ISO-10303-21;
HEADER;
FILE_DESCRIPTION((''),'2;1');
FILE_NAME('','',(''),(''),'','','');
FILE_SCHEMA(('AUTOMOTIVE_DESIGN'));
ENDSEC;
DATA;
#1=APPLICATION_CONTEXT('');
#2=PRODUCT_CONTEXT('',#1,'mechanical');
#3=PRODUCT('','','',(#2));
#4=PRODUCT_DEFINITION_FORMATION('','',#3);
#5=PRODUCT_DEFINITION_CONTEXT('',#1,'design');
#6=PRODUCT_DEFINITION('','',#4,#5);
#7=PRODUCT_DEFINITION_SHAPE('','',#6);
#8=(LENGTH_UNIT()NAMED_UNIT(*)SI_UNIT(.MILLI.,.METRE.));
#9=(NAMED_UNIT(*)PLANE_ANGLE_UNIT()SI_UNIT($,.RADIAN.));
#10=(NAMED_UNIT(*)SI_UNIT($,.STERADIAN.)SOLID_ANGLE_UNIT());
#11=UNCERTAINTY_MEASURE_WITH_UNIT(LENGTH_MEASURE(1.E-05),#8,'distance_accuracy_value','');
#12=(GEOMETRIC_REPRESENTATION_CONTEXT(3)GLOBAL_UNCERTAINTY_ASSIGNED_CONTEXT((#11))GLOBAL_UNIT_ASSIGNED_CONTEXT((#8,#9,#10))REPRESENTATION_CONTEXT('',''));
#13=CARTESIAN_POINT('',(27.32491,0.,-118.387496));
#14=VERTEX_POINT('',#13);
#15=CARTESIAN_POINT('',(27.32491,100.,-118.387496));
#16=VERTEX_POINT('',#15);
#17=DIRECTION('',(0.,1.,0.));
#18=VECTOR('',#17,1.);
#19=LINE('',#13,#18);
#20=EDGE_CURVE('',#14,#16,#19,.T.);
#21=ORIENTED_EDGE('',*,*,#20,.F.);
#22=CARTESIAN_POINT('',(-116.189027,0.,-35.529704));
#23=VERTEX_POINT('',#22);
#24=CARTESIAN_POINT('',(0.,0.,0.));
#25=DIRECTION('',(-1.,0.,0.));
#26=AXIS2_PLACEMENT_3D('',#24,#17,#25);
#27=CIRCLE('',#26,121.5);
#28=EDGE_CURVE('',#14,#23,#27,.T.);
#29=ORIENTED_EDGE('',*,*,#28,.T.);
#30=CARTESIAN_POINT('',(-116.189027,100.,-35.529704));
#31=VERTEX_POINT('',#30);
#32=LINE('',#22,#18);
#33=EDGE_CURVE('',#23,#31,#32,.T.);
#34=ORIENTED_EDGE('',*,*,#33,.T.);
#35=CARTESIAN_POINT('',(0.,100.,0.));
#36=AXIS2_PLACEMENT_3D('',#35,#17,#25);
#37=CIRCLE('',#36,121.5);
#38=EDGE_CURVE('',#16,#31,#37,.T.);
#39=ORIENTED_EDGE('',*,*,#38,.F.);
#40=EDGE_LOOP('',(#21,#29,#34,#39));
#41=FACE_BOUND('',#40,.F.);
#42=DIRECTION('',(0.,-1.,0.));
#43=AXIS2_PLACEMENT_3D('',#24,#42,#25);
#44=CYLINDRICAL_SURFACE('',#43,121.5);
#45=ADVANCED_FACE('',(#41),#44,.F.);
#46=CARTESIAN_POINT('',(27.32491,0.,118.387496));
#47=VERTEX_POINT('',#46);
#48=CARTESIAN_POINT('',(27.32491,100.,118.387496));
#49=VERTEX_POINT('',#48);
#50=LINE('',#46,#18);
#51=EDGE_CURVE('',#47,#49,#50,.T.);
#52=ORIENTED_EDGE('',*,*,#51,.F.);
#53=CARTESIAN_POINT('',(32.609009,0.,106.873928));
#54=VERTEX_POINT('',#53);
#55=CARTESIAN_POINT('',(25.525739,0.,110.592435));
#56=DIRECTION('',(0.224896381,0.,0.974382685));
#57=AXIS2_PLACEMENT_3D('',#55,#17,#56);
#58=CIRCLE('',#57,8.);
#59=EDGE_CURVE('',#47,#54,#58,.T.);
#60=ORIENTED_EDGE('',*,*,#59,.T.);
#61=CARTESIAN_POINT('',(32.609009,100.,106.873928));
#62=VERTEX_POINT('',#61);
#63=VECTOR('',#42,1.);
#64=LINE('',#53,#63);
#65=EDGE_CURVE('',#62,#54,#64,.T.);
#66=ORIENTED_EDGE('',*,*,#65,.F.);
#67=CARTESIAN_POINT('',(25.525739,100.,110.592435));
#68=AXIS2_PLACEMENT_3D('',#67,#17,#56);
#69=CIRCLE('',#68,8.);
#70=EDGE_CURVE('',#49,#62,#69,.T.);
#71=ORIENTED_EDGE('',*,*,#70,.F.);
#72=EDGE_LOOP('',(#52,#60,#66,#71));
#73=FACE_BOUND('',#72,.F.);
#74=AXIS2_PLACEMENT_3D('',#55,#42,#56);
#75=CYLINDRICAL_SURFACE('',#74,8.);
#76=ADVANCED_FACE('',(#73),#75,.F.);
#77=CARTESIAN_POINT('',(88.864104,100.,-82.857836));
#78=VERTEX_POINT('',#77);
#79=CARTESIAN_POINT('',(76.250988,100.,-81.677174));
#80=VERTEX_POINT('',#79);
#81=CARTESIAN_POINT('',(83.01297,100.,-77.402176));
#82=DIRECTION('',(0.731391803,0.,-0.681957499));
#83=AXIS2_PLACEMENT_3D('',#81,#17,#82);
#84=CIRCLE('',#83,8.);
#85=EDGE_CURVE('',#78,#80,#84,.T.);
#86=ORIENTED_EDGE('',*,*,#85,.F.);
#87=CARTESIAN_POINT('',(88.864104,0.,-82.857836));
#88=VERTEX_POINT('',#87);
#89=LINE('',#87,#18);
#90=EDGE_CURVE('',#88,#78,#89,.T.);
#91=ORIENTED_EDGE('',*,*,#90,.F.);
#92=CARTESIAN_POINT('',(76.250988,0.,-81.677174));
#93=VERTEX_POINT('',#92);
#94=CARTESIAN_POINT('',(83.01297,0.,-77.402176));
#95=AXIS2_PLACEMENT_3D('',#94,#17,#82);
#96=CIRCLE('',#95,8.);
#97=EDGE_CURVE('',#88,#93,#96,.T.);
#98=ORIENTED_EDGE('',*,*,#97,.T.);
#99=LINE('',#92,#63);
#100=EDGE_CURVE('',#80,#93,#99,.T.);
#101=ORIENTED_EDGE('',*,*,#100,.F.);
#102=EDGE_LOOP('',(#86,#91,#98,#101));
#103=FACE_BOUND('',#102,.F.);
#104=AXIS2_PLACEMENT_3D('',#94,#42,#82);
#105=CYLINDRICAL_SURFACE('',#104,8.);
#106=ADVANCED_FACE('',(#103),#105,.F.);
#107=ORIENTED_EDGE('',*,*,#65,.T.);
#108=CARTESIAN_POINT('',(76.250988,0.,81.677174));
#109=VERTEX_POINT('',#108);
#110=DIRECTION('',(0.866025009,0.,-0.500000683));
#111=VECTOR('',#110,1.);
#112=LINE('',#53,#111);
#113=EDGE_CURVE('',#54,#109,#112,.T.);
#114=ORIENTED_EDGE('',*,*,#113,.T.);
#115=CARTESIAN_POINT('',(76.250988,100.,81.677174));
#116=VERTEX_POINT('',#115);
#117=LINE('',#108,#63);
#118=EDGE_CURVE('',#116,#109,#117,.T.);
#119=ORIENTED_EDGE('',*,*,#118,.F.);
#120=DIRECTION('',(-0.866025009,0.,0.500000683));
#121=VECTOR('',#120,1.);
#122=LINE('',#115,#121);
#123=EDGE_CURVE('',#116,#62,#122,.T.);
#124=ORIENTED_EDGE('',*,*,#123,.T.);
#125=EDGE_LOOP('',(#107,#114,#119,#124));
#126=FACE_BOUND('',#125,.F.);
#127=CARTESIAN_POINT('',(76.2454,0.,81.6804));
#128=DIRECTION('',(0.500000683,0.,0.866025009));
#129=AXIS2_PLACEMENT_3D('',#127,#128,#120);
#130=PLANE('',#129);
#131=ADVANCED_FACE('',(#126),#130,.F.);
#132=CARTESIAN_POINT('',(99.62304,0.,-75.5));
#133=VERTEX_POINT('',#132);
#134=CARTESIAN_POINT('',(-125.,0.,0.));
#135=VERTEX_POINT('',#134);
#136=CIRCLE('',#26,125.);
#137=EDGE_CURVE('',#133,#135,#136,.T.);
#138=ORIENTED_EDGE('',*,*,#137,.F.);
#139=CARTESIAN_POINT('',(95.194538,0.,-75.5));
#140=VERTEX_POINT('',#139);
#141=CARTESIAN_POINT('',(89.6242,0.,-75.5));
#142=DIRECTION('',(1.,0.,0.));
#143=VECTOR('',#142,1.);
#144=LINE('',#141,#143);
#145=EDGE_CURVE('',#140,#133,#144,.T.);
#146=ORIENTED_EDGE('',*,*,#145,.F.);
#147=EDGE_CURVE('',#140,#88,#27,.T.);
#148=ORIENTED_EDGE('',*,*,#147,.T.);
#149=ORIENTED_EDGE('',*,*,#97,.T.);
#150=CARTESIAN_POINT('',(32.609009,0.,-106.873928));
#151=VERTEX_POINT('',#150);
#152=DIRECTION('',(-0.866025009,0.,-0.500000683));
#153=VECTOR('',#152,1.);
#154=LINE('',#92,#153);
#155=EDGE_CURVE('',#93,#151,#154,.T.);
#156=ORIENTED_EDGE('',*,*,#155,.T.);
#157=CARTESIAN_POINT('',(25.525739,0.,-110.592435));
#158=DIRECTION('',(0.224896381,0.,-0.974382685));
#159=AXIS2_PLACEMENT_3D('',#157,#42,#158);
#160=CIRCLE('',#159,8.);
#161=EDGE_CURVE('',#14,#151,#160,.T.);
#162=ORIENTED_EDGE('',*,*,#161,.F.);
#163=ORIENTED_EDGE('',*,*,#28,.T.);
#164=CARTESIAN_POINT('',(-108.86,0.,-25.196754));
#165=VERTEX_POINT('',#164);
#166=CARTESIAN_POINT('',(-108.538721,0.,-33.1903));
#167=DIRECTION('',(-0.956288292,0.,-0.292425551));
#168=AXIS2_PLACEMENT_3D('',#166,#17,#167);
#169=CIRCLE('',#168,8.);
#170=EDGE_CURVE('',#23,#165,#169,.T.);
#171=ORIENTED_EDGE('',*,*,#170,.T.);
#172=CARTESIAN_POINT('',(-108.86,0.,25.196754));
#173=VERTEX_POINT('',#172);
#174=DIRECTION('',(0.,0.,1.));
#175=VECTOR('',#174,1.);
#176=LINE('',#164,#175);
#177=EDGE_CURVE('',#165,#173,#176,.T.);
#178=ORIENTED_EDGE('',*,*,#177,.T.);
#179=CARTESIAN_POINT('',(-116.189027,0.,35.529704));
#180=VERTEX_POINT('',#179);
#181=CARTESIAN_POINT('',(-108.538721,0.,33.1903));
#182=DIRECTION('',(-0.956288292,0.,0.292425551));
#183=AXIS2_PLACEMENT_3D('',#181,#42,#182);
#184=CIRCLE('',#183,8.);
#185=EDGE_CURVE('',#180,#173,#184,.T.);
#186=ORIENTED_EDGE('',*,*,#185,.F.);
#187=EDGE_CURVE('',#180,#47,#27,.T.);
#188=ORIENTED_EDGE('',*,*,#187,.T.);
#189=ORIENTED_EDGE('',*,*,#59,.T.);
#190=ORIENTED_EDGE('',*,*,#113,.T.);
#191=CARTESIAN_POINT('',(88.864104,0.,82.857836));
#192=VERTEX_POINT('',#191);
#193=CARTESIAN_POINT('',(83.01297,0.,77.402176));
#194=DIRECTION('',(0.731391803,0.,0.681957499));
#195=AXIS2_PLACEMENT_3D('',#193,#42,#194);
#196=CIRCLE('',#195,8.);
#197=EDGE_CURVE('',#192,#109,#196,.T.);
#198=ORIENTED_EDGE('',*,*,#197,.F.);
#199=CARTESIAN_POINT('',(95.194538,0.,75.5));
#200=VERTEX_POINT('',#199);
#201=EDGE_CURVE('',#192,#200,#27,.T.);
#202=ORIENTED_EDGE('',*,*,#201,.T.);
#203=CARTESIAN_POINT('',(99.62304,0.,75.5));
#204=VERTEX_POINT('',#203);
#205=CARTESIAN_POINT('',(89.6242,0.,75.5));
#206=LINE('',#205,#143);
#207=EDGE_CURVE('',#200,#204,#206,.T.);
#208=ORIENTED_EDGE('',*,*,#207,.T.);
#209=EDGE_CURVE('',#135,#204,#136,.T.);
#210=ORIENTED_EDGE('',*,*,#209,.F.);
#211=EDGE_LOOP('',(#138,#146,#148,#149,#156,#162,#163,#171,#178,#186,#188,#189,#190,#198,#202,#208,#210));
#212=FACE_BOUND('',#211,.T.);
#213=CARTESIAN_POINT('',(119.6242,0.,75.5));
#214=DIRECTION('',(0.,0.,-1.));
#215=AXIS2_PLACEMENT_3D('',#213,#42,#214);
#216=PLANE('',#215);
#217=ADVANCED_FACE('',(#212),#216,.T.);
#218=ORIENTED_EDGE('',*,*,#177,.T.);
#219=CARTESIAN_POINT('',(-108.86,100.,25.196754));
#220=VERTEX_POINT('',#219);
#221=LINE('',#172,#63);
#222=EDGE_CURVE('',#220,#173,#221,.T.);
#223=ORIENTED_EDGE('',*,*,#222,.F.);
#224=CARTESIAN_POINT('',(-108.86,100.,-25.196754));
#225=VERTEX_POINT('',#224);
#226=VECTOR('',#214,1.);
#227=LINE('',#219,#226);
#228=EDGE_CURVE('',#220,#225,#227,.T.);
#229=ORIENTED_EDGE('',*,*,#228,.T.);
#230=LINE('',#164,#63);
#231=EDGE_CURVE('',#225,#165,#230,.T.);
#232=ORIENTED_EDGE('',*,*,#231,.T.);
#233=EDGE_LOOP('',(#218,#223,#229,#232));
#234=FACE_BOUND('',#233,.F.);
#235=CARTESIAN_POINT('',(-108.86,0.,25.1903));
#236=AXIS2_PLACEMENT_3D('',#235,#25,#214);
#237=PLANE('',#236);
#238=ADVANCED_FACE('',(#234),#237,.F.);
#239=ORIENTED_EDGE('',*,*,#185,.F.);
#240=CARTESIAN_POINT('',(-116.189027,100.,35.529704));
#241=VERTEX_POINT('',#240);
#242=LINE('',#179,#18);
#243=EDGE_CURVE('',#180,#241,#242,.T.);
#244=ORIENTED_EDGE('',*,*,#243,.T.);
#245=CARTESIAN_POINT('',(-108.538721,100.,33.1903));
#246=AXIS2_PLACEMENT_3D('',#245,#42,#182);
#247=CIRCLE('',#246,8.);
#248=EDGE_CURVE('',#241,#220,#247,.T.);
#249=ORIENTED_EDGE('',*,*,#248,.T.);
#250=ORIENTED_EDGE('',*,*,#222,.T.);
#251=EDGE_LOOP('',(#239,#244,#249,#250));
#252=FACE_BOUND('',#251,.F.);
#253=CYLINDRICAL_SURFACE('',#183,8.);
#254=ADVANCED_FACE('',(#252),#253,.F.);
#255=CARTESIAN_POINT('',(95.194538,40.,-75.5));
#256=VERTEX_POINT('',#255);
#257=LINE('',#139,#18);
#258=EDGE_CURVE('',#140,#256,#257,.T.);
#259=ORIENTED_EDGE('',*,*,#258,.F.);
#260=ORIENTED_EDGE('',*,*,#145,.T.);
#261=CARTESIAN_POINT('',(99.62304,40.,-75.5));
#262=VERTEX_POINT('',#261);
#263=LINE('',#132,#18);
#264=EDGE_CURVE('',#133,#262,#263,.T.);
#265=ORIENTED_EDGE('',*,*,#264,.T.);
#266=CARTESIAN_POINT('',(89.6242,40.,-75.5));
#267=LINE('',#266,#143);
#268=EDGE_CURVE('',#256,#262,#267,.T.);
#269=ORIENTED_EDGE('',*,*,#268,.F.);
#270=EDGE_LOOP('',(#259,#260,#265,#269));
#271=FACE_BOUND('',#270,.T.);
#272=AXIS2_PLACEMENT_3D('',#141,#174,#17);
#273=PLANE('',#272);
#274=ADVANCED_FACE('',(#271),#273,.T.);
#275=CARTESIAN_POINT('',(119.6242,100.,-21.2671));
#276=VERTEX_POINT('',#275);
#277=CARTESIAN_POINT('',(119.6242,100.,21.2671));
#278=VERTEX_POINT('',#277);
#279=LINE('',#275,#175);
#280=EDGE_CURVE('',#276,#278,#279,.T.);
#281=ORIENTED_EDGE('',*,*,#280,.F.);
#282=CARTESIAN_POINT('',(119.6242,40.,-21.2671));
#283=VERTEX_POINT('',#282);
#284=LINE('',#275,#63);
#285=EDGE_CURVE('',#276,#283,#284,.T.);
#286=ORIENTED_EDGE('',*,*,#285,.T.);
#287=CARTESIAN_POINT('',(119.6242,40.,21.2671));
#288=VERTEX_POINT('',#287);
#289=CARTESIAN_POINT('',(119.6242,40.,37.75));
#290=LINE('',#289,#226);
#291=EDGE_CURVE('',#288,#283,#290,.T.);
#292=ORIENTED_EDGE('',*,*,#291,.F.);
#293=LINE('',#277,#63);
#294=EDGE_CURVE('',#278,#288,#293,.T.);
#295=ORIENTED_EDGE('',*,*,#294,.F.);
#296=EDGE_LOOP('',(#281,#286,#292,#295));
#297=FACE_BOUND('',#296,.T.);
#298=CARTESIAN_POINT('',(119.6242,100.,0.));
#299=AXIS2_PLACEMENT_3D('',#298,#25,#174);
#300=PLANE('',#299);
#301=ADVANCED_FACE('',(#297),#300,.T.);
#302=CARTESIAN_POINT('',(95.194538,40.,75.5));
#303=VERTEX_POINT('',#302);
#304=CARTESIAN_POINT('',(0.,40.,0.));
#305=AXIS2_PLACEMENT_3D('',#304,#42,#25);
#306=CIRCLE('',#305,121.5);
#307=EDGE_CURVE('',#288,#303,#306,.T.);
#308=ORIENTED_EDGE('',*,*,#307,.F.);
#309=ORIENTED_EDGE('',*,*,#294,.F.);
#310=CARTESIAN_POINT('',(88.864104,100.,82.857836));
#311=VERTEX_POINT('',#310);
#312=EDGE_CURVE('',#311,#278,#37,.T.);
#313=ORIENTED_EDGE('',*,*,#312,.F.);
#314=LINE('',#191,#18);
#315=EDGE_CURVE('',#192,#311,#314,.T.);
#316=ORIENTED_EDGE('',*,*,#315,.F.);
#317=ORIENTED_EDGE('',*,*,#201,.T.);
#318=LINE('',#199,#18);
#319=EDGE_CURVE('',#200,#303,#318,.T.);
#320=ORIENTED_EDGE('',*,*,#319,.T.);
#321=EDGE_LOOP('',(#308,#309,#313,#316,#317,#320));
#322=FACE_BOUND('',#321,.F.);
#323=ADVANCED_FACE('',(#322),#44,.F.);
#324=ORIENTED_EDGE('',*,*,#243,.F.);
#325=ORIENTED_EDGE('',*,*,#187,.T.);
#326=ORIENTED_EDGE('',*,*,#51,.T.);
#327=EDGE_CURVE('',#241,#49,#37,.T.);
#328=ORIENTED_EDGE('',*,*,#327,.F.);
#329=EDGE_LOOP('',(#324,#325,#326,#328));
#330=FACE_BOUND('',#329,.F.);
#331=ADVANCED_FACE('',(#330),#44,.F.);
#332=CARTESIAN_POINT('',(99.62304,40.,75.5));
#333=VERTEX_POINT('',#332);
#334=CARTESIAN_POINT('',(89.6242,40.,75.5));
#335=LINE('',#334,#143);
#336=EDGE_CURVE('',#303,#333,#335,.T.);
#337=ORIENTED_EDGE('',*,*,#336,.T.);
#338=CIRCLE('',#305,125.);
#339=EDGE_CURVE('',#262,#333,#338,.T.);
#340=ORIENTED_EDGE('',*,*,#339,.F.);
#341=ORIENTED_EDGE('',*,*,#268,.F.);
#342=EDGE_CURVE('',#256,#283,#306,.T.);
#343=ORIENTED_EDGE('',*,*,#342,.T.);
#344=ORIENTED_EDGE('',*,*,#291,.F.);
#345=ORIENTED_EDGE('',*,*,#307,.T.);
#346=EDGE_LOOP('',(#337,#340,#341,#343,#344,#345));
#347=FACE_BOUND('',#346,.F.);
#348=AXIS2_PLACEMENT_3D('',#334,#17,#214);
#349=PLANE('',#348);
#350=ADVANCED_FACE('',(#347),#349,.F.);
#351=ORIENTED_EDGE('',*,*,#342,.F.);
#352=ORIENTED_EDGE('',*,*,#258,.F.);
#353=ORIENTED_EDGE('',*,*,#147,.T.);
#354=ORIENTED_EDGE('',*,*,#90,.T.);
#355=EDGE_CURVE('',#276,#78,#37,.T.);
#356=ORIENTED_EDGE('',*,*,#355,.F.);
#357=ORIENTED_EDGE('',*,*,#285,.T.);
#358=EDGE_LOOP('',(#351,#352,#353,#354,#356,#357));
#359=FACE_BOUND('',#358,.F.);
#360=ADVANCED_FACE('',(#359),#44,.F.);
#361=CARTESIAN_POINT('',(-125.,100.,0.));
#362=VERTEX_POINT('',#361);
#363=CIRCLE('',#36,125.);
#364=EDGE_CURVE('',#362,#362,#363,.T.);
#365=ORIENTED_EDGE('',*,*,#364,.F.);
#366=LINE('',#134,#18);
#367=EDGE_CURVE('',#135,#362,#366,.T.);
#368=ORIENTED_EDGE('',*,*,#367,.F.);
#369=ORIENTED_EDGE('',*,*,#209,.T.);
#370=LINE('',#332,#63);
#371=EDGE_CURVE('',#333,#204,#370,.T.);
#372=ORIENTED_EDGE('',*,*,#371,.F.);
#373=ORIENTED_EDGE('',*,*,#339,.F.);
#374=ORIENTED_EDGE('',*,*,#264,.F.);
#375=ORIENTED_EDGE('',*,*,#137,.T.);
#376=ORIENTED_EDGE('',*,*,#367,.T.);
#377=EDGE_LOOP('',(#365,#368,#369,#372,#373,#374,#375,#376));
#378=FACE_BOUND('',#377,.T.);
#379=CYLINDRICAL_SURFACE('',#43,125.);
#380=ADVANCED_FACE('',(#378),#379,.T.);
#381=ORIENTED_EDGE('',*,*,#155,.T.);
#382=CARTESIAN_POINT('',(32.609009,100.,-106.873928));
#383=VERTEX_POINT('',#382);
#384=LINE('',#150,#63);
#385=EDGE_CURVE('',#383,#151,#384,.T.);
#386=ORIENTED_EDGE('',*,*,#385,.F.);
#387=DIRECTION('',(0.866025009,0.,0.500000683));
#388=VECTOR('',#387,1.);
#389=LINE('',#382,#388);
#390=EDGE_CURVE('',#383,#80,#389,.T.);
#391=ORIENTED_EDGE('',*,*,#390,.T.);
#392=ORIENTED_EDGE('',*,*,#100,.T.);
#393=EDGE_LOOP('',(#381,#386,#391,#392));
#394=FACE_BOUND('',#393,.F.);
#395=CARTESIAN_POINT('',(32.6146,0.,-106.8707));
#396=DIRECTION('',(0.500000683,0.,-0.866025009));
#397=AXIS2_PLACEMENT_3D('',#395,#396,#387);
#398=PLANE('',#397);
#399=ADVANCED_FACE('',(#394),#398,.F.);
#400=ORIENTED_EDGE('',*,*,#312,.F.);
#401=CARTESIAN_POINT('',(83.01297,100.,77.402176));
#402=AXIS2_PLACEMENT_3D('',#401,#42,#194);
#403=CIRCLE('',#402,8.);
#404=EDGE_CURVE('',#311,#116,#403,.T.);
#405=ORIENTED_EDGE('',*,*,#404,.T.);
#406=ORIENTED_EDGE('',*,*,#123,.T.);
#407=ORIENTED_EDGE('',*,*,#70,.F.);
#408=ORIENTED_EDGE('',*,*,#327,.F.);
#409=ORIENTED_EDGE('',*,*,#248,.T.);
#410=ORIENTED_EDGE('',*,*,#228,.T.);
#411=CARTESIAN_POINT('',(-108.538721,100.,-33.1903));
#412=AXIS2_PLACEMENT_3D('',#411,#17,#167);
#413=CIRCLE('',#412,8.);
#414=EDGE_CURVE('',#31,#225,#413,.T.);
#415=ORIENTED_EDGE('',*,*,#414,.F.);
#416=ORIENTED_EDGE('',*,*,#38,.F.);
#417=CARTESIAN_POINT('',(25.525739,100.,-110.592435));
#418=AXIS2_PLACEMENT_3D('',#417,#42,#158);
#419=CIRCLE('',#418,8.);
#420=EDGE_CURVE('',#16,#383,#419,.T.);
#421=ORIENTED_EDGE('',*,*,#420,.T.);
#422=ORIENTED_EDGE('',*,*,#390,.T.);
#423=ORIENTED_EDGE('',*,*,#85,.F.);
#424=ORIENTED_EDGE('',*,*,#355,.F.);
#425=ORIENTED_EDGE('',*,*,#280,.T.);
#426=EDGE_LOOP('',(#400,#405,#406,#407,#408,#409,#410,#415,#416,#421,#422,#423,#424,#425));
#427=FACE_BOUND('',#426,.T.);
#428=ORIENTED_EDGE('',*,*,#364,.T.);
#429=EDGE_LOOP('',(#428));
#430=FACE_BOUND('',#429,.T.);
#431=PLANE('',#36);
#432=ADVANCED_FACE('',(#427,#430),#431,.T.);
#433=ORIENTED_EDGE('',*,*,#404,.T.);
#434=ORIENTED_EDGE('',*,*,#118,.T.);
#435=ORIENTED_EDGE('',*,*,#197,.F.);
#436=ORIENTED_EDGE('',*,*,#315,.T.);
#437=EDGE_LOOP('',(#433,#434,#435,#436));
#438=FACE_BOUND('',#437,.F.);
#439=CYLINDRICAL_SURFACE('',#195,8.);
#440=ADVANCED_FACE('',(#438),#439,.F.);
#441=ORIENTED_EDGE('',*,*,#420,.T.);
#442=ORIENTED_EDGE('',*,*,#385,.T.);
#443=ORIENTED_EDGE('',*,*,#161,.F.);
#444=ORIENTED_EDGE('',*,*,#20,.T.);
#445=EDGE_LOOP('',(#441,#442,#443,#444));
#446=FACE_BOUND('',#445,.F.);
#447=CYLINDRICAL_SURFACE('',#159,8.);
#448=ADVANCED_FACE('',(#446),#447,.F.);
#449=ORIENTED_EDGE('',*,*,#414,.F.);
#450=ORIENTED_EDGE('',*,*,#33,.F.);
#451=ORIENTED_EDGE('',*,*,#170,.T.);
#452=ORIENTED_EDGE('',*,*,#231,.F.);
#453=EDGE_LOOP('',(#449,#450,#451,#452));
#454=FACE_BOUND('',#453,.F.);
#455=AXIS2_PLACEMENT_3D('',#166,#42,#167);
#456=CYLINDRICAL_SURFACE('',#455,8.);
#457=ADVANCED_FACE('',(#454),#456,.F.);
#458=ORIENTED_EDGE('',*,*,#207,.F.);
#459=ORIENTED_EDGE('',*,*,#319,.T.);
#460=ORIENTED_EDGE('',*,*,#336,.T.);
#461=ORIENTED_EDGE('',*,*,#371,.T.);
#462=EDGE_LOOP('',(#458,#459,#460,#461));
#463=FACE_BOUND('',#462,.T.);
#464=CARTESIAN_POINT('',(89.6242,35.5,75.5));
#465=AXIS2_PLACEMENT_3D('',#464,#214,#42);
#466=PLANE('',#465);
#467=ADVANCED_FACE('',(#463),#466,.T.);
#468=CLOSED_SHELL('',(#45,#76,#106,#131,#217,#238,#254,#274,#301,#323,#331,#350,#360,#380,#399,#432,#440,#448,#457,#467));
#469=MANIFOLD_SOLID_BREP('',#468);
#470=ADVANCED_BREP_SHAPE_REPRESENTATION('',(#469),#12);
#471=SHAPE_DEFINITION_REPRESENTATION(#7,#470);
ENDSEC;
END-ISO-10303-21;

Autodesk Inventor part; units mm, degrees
ref_plane "YZ Plane" through (0, 0, 0) normal (1, 0, 0) x (0, 1, 0)
ref_plane "XZ Plane" through (0, 0, 0) normal (0, 1, 0) x (-1, 0, 0)
ref_plane "XY Plane" through (0, 0, 0) normal (0, 0, 1) x (1, 0, 0)
sketch "スケッチ1" plane through (0, 0, 0) normal (0, 1, 0) x (-1, 0, 0)
  circle A0 centre (0, 0) radius 125
  circle A1 centre (0, 0) radius 121.5
  line L0 (118.86, 0) -> (118.86, -25.1903)
  line L1 (118.86, 0) -> (118.86, 25.1903)
  line L2 (118.86, 25.1903) -> (108.86, 25.1903)
  line L3 (108.86, 25.1903) -> (108.86, -25.1903)
  line L4 (108.86, -25.1903) -> (118.86, -25.1903)
  line L5 (118.86, -25.1903) -> (118.86, 25.1903)
  line L6 (-59.43, 102.9358) -> (-37.6146, 115.5309)
  line L7 (-59.43, 102.9358) -> (-81.2454, 90.3406)
  line L8 (-81.2454, 90.3406) -> (-76.2454, 81.6804)
  line L9 (-76.2454, 81.6804) -> (-32.6146, 106.8707)
  line L10 (-32.6146, 106.8707) -> (-37.6146, 115.5309)
  line L11 (-37.6146, 115.5309) -> (-81.2454, 90.3406)
  line L12 (-59.43, -102.9358) -> (-81.2454, -90.3406)
  line L13 (-59.43, -102.9358) -> (-37.6146, -115.5309)
  line L14 (-37.6146, -115.5309) -> (-32.6146, -106.8707)
  line L15 (-32.6146, -106.8707) -> (-76.2454, -81.6804)
  line L16 (-76.2454, -81.6804) -> (-81.2454, -90.3406)
  line L17 (-81.2454, -90.3406) -> (-37.6146, -115.5309)
  dimension "d0" = 250
  dimension "d1" = 243
  dimension "d2" = 118.86
  dimension "d3" = 10
  dimension "d6" = 360
extrude "押し出し1" add sketch "スケッチ1" along normal blind 100 contours A0 | A1 L0 L1 | L1 L0 L4 L3 L2 | L6 L7 A1 | L10 L9 L8 L7 L6 | A1 L12 L13 | L13 L12 L16 L15 L14
fillet "フィレット1" radius 8 6 edges at (37.6146, 50, -115.5309) (81.2454, 50, -90.3406) (-118.86, 50, 25.1903) (-118.86, 50, -25.1903) (81.2454, 50, 90.3406) (37.6146, 50, 115.5309)
sketch "スケッチ4" plane through (0, 100, 0) normal (0, 1, 0) x (1, 0, 0)
  line L0 (119.6242, 0) -> (119.6242, -21.2671)
  arc A0 (88.8593, -82.863) -> (88.8593, 82.863) centre (0, 0) ccw projected
  line L1 (119.6242, 0) -> (119.6242, 21.2671)
  arc A1 (119.6242, -21.2671) -> (119.6242, 21.2671) centre (0, 0) ccw
extrude "押し出し4" add sketch "スケッチ4" against normal blind 100
sketch "スケッチ5" plane through (119.6242, 100, -21.2671) normal (-1, 0, 0) x (0, 0, 1)
  line L0 (96.7671, -100) -> (-54.2329, -100)
  line L1 (-54.2329, -100) -> (-54.2329, -64.5)
  line L2 (-54.2329, -64.5) -> (96.7671, -64.5)
  line L3 (96.7671, -64.5) -> (96.7671, -100)
  line L4 (96.7671, -100) -> (-54.2329, -64.5) construction
  line L5 (-54.2329, -100) -> (96.7671, -64.5) construction
  line L6 (42.5342, -100) -> (0, -100) projected
  point P0 (21.2671, -100)
  point P1 (21.2671, -82.25)
  dimension "d20" = 151
  dimension "d21" = 35.5
  dimension "d22" = 0
extrude "押し出し5" add sketch "スケッチ5" along normal blind 30
sketch "スケッチ6" plane through (89.6242, 100, -21.2671) normal (-1, 0, 0) x (0, 0, 1)
  line L0 (96.7671, -64.5) -> (-54.2329, -64.5) projected
  line L1 (-54.2329, -100) -> (96.7671, -100) projected
  line L2 (-54.2329, -64.5) -> (96.7671, -64.5)
  line L3 (96.7671, -64.5) -> (96.7671, -100)
  line L4 (96.7671, -100) -> (-54.2329, -100)
  line L5 (-54.2329, -100) -> (-54.2329, -64.5)
  line L6 (-54.2329, -64.5) -> (-54.2329, -100) projected
  line L7 (-54.2329, -64.5) -> (96.7671, -64.5)
  line L8 (96.7671, -64.5) -> (96.7671, -60)
  line L9 (96.7671, -60) -> (-54.2329, -60)
  line L10 (-54.2329, -60) -> (-54.2329, -64.5)
  point P0 (21.2671, -100)
  point P1 (-54.2329, -100)
  dimension "d27" = 151
  dimension "d28" = 4.5
extrude "押し出し6" cut sketch "スケッチ6" against normal blind 100
properties part number "allwall" material "PC/ABS プラスチック"
